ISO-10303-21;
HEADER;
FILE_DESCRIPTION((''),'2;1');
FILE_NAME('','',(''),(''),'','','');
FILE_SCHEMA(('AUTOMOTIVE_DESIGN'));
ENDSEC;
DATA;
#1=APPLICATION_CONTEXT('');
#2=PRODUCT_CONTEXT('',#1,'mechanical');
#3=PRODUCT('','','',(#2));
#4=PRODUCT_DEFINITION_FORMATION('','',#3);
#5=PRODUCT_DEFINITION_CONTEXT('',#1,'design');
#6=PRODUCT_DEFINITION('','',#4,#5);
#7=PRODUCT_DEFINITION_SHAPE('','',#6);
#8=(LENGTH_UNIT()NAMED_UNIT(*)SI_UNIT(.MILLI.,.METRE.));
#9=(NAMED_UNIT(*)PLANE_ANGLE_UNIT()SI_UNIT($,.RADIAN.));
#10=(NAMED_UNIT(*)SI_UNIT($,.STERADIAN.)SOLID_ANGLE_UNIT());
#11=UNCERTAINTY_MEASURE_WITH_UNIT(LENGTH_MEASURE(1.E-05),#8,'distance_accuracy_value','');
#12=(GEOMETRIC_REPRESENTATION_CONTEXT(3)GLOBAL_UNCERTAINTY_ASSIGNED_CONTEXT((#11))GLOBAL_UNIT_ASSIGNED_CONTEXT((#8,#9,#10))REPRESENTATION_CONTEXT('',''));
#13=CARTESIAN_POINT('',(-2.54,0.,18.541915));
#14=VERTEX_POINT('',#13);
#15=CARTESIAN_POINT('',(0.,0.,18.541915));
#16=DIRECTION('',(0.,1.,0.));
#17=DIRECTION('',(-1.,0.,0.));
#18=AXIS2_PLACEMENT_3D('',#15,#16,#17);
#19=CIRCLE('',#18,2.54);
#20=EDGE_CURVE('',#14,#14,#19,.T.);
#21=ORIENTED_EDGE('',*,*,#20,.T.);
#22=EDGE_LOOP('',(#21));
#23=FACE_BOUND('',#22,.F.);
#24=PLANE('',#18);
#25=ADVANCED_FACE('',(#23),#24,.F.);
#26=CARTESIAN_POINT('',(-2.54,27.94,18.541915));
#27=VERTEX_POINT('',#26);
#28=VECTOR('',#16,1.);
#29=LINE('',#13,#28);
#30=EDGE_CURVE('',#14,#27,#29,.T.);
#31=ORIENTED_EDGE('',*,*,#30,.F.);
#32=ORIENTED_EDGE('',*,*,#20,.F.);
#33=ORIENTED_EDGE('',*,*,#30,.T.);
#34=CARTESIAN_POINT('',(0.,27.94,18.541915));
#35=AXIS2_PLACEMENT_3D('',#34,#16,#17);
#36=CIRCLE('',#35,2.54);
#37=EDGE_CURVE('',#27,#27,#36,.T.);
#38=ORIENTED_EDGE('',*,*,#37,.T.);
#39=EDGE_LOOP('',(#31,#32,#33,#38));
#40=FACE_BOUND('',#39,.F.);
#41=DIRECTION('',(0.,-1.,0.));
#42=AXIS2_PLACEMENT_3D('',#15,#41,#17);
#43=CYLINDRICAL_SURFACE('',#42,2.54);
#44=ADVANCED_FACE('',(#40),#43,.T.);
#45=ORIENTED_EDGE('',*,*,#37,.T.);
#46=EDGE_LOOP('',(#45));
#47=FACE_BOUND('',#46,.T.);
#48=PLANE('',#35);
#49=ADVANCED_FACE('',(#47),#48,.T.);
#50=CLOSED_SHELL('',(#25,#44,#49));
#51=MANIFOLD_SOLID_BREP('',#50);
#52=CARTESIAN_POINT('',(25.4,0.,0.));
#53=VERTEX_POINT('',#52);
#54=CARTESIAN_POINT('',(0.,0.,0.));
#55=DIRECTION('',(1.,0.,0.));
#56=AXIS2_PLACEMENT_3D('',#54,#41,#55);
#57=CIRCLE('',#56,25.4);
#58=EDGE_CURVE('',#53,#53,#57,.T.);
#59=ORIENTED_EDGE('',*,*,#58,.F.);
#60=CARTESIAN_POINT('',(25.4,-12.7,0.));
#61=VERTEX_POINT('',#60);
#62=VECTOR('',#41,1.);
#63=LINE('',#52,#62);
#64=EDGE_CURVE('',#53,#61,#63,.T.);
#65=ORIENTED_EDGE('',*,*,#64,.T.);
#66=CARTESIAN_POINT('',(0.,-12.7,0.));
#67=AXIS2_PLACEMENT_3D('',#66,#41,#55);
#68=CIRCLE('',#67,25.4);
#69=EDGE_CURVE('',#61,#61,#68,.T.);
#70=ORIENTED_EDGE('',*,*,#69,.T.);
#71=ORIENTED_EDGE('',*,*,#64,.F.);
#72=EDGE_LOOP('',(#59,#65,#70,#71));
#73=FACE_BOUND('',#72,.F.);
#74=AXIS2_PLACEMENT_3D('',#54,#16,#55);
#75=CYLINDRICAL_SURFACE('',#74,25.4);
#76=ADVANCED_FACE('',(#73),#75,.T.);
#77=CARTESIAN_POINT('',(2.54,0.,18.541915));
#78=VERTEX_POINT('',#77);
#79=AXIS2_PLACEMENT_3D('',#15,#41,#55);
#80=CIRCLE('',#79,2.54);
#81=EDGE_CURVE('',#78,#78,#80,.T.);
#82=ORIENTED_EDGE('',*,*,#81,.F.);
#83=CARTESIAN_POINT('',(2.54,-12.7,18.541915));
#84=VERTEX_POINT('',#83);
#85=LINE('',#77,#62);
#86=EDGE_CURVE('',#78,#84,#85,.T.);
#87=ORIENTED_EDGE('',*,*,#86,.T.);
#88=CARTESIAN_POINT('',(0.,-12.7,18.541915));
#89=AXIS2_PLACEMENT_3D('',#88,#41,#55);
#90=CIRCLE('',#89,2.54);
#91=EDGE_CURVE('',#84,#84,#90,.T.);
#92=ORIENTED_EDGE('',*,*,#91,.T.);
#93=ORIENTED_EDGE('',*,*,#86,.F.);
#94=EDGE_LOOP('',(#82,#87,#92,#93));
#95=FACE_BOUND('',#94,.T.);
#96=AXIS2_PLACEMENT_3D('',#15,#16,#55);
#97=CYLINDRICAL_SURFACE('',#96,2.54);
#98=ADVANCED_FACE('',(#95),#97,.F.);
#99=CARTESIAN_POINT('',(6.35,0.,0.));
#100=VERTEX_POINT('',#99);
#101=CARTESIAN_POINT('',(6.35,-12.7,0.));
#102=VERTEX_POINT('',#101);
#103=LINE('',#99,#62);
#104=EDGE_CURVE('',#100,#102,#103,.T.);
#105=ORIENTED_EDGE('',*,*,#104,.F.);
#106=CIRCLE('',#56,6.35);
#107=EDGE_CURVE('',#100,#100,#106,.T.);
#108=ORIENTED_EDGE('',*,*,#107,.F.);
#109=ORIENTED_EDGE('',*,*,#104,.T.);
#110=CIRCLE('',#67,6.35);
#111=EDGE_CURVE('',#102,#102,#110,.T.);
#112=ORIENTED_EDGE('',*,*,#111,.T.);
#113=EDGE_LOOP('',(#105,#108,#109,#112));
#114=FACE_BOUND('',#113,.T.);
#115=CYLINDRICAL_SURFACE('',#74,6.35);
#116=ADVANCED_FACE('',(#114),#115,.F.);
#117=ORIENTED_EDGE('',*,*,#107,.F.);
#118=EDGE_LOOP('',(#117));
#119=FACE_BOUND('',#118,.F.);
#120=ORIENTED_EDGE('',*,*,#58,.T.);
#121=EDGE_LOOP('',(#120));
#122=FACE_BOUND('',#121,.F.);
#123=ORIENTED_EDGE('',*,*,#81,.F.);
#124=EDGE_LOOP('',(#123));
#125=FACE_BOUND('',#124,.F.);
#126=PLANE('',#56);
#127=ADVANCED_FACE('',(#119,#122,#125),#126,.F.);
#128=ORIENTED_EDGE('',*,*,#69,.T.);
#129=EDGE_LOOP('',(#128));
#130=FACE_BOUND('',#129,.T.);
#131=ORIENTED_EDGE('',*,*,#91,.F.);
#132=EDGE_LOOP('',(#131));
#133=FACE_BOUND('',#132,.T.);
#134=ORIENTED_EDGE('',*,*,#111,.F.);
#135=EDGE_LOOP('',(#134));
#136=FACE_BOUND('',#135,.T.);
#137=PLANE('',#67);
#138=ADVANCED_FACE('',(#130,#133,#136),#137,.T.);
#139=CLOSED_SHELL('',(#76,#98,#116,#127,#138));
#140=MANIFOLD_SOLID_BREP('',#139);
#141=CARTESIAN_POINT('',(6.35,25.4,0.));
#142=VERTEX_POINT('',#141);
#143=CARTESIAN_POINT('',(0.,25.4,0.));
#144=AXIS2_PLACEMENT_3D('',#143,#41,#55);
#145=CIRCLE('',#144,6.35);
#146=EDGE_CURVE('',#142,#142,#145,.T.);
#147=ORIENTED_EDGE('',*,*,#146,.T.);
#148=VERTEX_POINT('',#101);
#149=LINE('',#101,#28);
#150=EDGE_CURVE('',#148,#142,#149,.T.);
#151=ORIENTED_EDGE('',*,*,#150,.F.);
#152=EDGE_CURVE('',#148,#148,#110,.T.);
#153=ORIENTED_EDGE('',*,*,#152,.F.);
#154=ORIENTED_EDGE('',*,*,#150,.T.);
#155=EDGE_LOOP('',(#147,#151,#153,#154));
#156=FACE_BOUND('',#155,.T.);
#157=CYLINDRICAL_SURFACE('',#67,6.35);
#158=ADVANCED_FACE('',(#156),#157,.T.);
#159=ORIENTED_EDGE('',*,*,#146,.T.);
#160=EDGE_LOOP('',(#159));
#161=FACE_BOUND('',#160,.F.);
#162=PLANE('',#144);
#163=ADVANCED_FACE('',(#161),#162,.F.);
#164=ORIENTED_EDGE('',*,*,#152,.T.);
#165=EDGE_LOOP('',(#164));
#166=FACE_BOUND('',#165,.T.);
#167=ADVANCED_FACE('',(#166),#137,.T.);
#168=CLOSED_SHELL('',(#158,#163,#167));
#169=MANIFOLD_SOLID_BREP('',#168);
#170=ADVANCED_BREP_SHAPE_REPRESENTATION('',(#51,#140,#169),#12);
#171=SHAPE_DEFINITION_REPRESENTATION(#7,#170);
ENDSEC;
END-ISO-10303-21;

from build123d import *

# Parameters (mm, degrees)
F0_R     = 25.4
F0_R_2   = 6.35
F0_R_3   = 2.54
F1_DEPTH = 12.7
F2_R     = 6.35
F3_DEPTH = 38.1
F5_R     = 2.54
F6_DEPTH = 27.94


with BuildPart() as f1:
    # F0 (on Front) → F1 (new body)
    with BuildSketch(Plane.XZ):
        Circle(F0_R)
        Circle(F0_R_2, mode=Mode.SUBTRACT)
        with Locations((0, 18.5419153422)):
            Circle(F0_R_3, mode=Mode.SUBTRACT)
    extrude(amount=F1_DEPTH)


with BuildPart() as f3:
    # F2 (on face) → F3 (new body)
    with BuildSketch(Plane.XZ.offset(12.7)):
        Circle(F2_R)
    extrude(amount=-F3_DEPTH)


with BuildPart() as f6:
    # F5 (on face) → F6 (new body)
    with BuildSketch(Plane(origin=(0, 0, 0), x_dir=(-1, 0, 0), z_dir=(0, 1, 0))):
        with Locations((0, 18.5419153422)):
            Circle(F5_R)
    extrude(amount=F6_DEPTH)


solid = Compound([f1.part, f3.part, f6.part])
